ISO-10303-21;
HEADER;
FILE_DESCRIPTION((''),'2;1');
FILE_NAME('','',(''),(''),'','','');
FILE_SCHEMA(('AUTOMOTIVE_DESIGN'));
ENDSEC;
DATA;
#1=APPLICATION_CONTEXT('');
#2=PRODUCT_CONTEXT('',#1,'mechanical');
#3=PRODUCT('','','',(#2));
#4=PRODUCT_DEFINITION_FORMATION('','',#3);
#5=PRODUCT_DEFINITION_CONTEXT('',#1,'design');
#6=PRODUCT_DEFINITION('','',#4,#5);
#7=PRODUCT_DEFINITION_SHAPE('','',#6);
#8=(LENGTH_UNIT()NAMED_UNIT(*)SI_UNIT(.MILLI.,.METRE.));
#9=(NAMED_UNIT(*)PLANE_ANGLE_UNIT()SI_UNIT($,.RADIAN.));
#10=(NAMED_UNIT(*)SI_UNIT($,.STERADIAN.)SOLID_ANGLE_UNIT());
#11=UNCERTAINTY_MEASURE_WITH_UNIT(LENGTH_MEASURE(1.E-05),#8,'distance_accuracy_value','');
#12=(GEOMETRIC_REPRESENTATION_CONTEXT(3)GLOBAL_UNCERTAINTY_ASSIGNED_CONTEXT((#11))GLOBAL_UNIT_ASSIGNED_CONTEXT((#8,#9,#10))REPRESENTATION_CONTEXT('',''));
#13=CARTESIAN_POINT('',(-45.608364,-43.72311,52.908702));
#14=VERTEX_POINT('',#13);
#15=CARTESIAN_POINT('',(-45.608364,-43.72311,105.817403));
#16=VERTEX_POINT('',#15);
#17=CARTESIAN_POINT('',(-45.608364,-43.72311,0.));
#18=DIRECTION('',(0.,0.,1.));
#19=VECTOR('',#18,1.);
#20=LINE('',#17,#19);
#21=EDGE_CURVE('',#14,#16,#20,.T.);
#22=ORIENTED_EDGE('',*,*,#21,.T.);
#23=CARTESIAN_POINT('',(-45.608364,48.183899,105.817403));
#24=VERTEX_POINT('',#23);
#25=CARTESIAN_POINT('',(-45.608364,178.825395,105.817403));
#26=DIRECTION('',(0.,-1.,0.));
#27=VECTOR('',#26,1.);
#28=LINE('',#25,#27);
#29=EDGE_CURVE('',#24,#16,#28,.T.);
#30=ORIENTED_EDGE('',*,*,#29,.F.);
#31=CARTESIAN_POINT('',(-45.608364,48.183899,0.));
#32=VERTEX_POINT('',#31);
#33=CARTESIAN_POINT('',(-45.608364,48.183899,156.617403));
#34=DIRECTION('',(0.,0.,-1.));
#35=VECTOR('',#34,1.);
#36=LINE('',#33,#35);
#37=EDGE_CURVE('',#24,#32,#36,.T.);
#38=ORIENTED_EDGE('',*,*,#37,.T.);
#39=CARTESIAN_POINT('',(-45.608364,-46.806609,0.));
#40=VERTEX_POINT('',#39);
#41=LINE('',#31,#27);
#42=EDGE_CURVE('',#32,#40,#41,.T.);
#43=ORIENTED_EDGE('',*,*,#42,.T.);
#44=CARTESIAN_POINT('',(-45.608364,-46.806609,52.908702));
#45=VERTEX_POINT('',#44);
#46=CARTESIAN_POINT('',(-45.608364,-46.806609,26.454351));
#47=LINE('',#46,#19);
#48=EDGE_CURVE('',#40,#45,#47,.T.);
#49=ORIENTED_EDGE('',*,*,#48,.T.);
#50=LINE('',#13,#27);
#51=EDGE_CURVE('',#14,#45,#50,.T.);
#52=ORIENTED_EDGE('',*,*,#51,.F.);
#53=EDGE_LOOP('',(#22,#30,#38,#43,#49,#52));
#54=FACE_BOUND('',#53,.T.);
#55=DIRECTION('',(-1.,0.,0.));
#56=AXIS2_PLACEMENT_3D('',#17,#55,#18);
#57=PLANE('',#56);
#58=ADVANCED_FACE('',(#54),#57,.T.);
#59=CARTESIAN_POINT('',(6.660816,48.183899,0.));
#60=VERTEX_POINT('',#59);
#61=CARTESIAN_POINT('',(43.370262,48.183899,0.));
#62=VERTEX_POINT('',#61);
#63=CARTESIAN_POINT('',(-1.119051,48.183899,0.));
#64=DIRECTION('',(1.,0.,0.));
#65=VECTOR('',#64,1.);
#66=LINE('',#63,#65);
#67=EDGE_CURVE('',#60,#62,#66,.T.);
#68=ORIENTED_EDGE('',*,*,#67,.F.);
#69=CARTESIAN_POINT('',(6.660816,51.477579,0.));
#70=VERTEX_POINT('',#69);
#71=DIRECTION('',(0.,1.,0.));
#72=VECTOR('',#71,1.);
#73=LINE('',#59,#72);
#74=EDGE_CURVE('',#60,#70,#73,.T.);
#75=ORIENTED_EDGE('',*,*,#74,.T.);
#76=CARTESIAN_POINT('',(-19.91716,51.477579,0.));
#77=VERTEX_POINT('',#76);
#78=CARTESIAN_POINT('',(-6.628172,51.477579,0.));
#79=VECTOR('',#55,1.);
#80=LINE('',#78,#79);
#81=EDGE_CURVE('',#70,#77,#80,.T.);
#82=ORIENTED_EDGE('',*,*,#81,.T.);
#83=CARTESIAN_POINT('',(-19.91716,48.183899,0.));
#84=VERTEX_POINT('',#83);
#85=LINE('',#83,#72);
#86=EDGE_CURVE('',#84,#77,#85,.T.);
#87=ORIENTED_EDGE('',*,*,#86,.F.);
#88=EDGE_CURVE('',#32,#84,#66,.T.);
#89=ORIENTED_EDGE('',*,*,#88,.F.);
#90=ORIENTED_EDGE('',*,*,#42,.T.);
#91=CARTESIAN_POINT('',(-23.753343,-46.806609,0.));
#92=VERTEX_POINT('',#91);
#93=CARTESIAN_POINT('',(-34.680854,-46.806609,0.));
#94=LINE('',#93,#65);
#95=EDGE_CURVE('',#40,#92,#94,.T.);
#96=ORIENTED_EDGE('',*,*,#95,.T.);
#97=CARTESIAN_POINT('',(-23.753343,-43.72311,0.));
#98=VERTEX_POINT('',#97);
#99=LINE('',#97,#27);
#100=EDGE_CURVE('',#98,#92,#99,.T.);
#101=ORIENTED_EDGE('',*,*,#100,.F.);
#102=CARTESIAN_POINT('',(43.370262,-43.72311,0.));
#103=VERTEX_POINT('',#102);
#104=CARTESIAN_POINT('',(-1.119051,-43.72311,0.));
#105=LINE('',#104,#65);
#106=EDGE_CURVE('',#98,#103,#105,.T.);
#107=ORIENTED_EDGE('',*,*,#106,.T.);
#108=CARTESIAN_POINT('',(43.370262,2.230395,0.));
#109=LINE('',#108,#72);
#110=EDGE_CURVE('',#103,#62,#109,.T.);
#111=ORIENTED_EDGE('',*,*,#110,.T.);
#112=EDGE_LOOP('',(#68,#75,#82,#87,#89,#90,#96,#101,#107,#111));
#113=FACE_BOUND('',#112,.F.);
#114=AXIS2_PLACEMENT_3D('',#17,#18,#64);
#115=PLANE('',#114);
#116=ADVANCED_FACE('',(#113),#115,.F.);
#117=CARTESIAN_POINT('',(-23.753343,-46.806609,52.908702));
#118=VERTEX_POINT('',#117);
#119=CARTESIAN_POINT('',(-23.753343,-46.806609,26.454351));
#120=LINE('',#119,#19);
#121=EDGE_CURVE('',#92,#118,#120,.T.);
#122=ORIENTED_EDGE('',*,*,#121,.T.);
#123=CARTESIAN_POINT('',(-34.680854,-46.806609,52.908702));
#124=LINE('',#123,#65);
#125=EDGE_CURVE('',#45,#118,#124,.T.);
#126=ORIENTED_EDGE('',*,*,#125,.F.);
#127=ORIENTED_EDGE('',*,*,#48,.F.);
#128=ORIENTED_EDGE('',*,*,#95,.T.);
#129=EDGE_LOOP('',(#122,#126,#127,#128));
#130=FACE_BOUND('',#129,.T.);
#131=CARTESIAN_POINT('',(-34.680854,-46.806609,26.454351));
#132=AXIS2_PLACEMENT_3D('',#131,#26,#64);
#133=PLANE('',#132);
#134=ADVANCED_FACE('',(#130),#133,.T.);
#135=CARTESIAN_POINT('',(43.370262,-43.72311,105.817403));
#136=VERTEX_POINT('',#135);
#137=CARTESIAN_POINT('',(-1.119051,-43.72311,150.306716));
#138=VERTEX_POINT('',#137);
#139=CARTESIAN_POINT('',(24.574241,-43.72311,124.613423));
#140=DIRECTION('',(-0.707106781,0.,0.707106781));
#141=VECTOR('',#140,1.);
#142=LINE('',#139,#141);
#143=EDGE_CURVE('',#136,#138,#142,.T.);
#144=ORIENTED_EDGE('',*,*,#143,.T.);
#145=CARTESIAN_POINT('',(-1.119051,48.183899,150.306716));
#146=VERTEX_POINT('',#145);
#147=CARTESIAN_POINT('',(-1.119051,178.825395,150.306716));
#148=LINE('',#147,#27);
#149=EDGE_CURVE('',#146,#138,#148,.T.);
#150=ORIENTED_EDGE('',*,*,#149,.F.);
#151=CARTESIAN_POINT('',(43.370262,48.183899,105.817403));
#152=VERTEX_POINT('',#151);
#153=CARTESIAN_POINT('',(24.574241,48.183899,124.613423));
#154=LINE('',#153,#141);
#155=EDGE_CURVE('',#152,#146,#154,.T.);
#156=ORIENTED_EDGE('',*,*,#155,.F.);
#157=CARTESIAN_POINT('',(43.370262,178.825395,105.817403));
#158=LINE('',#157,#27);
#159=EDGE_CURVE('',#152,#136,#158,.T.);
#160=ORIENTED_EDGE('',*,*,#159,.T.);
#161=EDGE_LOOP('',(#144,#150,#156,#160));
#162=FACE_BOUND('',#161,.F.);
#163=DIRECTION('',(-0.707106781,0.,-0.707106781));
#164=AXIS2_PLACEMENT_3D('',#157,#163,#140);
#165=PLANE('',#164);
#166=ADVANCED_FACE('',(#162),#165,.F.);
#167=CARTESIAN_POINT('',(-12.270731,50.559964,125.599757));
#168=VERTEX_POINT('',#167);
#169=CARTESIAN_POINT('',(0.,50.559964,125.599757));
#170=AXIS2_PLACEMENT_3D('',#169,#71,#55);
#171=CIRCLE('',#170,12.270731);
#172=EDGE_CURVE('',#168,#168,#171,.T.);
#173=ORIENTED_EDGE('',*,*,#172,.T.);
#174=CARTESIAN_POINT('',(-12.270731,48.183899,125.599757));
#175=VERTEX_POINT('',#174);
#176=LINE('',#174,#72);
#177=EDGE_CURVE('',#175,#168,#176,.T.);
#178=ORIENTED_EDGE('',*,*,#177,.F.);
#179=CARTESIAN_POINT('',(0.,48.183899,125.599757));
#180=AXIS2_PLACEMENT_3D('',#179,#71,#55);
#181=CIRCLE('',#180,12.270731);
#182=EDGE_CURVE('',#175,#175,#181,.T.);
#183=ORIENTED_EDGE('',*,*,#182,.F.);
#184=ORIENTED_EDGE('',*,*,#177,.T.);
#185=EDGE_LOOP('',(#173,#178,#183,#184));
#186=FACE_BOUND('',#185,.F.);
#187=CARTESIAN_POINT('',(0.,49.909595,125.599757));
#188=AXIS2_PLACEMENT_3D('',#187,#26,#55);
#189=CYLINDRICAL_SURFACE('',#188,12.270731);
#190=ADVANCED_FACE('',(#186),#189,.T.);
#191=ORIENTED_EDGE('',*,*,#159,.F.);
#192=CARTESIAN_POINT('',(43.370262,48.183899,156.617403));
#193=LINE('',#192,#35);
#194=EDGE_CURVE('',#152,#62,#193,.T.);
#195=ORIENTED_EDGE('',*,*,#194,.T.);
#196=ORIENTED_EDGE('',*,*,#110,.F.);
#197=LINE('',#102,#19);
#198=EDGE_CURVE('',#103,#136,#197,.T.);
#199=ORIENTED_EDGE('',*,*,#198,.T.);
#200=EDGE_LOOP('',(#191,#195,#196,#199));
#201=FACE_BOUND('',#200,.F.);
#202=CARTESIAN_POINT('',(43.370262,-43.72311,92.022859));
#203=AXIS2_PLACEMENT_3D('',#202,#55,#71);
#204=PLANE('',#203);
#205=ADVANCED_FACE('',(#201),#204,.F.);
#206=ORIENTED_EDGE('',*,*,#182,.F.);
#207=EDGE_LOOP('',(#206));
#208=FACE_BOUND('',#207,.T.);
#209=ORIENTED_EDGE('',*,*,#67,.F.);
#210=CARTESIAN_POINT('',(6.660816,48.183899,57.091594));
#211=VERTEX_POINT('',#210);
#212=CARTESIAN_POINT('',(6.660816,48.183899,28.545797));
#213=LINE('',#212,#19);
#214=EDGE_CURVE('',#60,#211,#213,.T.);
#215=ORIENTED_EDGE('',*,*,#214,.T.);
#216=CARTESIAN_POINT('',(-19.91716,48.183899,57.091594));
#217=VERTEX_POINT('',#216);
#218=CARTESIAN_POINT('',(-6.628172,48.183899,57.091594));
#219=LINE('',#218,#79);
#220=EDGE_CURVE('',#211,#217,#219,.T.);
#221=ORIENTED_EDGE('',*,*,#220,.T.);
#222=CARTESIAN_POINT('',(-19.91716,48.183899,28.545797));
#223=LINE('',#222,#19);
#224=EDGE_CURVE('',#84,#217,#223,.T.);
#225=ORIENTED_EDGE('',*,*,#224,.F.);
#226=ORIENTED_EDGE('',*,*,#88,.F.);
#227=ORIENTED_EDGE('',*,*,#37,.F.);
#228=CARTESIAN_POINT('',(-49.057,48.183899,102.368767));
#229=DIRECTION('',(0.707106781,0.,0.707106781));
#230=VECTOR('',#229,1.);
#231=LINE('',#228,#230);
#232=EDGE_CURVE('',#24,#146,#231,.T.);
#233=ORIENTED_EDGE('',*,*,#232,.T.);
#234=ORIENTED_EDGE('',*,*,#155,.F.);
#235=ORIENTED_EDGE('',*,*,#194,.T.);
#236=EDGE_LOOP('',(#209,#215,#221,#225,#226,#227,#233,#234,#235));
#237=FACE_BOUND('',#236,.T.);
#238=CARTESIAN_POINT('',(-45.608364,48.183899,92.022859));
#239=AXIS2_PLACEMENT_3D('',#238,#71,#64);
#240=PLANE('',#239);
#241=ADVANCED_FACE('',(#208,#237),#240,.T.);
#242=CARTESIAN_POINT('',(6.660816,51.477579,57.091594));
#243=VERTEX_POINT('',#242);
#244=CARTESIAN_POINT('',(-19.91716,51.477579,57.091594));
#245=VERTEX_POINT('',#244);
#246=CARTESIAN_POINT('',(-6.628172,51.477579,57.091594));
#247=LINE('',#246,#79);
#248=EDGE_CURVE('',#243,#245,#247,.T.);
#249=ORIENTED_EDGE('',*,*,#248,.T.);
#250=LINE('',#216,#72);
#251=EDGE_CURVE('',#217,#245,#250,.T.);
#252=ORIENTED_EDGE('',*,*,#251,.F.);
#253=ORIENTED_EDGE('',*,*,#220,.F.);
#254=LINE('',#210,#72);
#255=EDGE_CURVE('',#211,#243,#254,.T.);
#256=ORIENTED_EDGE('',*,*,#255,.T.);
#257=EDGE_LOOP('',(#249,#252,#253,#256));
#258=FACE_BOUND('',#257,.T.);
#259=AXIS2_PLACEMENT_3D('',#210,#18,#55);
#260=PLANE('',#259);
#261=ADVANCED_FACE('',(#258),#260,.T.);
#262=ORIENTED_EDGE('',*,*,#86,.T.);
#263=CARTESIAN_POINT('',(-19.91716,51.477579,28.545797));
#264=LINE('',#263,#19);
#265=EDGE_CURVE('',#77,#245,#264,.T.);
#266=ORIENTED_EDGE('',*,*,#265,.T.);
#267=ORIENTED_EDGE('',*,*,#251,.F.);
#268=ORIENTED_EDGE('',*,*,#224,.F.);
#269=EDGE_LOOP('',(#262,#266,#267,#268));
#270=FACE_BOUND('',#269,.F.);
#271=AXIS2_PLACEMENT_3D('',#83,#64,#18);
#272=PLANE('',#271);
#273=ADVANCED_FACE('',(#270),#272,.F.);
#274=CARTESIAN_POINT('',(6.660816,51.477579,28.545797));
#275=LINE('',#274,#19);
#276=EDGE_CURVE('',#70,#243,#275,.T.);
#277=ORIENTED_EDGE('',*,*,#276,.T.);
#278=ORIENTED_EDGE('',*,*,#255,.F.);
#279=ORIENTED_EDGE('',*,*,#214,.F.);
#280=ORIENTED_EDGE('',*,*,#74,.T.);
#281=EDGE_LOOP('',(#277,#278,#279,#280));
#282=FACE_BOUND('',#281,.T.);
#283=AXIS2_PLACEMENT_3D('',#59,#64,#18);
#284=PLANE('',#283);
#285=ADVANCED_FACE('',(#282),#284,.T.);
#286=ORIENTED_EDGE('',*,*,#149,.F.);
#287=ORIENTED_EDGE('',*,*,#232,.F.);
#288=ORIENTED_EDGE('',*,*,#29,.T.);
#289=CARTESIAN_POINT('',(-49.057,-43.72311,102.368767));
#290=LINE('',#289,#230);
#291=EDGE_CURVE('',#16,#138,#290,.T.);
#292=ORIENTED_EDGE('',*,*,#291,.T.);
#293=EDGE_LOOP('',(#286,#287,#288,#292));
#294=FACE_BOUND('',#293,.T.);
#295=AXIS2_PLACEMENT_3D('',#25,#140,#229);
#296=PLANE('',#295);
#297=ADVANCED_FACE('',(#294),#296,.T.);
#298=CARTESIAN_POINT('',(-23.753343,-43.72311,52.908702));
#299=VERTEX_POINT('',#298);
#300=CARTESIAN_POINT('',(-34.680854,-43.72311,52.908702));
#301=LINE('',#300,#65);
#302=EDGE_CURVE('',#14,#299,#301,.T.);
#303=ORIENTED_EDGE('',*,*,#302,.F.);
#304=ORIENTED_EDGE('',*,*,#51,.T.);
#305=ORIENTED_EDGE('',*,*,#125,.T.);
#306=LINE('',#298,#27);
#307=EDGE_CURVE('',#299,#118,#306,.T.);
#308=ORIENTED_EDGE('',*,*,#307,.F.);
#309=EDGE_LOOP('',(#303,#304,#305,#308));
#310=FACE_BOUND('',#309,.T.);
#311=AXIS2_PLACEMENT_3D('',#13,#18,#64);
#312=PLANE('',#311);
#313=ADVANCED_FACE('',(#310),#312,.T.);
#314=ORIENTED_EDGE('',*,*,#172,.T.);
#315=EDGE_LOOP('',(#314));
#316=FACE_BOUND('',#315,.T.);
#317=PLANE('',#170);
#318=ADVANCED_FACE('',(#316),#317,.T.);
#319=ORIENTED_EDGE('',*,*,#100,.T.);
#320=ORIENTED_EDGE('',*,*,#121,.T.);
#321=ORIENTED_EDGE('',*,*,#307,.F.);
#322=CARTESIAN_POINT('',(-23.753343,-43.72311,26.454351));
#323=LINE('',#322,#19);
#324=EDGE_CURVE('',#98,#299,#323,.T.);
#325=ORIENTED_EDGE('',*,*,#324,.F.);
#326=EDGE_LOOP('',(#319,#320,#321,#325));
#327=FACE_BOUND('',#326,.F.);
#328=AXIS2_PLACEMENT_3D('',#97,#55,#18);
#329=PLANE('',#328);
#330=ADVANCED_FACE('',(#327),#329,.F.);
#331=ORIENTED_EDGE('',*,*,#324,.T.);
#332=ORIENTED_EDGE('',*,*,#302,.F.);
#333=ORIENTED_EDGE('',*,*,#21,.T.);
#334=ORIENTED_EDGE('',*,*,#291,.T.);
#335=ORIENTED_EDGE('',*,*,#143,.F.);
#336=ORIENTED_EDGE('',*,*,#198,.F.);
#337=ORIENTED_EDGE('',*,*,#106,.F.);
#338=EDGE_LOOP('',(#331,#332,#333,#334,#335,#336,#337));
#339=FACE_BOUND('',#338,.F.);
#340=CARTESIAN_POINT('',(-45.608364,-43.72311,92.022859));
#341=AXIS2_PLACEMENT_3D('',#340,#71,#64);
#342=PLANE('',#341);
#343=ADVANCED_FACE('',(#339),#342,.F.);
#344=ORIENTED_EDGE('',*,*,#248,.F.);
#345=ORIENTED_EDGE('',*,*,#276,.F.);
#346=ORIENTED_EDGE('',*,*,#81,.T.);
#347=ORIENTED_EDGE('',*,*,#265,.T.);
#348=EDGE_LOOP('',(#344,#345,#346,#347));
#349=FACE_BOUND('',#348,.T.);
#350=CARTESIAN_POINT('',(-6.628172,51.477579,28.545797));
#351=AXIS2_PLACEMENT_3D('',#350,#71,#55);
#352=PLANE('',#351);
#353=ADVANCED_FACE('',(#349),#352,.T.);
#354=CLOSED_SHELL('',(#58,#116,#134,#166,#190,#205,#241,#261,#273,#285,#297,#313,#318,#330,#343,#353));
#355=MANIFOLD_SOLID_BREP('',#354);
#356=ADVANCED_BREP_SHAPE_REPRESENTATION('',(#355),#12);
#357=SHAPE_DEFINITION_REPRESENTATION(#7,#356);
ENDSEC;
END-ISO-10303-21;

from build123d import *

# Parameters (mm, degrees)
F0_W        = 88.978625834
F0_H        = 91.9070094824
F1_DEPTH    = 92.0228585601
F2_W        = 88.978625834
F2_H        = 91.9070094824
F3_DEPTH    = 64.5945444703
F4_T1_DEPTH = 353.1900010597
F5_W        = 26.5779765323
F5_H        = 57.0915937424
F6_DEPTH    = 3.2936800271
F8_W        = 21.8550208956
F8_H        = 52.9087015152
F9_DEPTH    = 3.0834991485
F10_R       = 12.2707310255
F11_DEPTH   = 1.7256960273
F12_DEPTH   = 0.6503686309


# Not quite as in the source:
# - a fillet or chamfer that OpenCascade refuses, or shapes differently, is made with other operations: its cross-section is extruded or revolved along the edge and cut away or added


with BuildPart() as f1:
    # F0 (on Top) → F1 (new body)
    with BuildSketch(Plane.XY):
        with Locations((-1.1190511286, 2.2303946316)):
            Rectangle(F0_W, F0_H)
    extrude(amount=F1_DEPTH)

    # F2 (on face) → F3 (join)
    with BuildSketch(Plane.XY.offset(92.0228585601)):
        with Locations((-1.1190511286, 2.2303946316)):
            Rectangle(F2_W, F2_H)
    extrude(amount=F3_DEPTH)

    # F4: chamfer of 50.8 on 2 edges, made by hand

    # F4_s2 → F4_t1 (cut)
    with BuildSketch(Plane.XZ.offset(-178.8253951615)):
        Polygon((-45.6083640456, 105.8174030304), (5.1916359544, 156.6174030304), (-45.6083640456, 156.6174030304), align=None)
        Polygon((43.3702617884, 105.8174030304), (-7.4297382116, 156.6174030304), (43.3702617884, 156.6174030304), align=None)
    extrude(amount=F4_T1_DEPTH, mode=Mode.SUBTRACT)

    # F5 (on face) → F6 (join)
    with BuildSketch(Plane(origin=(0, 48.1838993728, 0), x_dir=(-1, 0, 0), z_dir=(0, 1, 0))):
        with Locations((6.6281720065, 28.5457968712)):
            Rectangle(F5_W, F5_H)
    extrude(amount=F6_DEPTH)

    # F8 (on face) → F9 (join)
    with BuildSketch(Plane.XZ.offset(43.7231101096)):
        with Locations((-34.6808535978, 26.4543507576)):
            Rectangle(F8_W, F8_H)
    extrude(amount=F9_DEPTH)

    # F10 (on face) → F11 (join)
    with BuildSketch(Plane(origin=(0, 48.1838993728, 0), x_dir=(-1, 0, 0), z_dir=(0, 1, 0))):
        with Locations((0, 125.5997568369)):
            Circle(F10_R)
    extrude(amount=F11_DEPTH)

    # F12 (add): a face of the model
    f12_faces = [f1.faces().sort_by_distance(p)[0] for p in [
        (0, 49.9095954001, 125.5997568369),
    ]]
    extrude(f12_faces, amount=F12_DEPTH)


solid = f1.part
